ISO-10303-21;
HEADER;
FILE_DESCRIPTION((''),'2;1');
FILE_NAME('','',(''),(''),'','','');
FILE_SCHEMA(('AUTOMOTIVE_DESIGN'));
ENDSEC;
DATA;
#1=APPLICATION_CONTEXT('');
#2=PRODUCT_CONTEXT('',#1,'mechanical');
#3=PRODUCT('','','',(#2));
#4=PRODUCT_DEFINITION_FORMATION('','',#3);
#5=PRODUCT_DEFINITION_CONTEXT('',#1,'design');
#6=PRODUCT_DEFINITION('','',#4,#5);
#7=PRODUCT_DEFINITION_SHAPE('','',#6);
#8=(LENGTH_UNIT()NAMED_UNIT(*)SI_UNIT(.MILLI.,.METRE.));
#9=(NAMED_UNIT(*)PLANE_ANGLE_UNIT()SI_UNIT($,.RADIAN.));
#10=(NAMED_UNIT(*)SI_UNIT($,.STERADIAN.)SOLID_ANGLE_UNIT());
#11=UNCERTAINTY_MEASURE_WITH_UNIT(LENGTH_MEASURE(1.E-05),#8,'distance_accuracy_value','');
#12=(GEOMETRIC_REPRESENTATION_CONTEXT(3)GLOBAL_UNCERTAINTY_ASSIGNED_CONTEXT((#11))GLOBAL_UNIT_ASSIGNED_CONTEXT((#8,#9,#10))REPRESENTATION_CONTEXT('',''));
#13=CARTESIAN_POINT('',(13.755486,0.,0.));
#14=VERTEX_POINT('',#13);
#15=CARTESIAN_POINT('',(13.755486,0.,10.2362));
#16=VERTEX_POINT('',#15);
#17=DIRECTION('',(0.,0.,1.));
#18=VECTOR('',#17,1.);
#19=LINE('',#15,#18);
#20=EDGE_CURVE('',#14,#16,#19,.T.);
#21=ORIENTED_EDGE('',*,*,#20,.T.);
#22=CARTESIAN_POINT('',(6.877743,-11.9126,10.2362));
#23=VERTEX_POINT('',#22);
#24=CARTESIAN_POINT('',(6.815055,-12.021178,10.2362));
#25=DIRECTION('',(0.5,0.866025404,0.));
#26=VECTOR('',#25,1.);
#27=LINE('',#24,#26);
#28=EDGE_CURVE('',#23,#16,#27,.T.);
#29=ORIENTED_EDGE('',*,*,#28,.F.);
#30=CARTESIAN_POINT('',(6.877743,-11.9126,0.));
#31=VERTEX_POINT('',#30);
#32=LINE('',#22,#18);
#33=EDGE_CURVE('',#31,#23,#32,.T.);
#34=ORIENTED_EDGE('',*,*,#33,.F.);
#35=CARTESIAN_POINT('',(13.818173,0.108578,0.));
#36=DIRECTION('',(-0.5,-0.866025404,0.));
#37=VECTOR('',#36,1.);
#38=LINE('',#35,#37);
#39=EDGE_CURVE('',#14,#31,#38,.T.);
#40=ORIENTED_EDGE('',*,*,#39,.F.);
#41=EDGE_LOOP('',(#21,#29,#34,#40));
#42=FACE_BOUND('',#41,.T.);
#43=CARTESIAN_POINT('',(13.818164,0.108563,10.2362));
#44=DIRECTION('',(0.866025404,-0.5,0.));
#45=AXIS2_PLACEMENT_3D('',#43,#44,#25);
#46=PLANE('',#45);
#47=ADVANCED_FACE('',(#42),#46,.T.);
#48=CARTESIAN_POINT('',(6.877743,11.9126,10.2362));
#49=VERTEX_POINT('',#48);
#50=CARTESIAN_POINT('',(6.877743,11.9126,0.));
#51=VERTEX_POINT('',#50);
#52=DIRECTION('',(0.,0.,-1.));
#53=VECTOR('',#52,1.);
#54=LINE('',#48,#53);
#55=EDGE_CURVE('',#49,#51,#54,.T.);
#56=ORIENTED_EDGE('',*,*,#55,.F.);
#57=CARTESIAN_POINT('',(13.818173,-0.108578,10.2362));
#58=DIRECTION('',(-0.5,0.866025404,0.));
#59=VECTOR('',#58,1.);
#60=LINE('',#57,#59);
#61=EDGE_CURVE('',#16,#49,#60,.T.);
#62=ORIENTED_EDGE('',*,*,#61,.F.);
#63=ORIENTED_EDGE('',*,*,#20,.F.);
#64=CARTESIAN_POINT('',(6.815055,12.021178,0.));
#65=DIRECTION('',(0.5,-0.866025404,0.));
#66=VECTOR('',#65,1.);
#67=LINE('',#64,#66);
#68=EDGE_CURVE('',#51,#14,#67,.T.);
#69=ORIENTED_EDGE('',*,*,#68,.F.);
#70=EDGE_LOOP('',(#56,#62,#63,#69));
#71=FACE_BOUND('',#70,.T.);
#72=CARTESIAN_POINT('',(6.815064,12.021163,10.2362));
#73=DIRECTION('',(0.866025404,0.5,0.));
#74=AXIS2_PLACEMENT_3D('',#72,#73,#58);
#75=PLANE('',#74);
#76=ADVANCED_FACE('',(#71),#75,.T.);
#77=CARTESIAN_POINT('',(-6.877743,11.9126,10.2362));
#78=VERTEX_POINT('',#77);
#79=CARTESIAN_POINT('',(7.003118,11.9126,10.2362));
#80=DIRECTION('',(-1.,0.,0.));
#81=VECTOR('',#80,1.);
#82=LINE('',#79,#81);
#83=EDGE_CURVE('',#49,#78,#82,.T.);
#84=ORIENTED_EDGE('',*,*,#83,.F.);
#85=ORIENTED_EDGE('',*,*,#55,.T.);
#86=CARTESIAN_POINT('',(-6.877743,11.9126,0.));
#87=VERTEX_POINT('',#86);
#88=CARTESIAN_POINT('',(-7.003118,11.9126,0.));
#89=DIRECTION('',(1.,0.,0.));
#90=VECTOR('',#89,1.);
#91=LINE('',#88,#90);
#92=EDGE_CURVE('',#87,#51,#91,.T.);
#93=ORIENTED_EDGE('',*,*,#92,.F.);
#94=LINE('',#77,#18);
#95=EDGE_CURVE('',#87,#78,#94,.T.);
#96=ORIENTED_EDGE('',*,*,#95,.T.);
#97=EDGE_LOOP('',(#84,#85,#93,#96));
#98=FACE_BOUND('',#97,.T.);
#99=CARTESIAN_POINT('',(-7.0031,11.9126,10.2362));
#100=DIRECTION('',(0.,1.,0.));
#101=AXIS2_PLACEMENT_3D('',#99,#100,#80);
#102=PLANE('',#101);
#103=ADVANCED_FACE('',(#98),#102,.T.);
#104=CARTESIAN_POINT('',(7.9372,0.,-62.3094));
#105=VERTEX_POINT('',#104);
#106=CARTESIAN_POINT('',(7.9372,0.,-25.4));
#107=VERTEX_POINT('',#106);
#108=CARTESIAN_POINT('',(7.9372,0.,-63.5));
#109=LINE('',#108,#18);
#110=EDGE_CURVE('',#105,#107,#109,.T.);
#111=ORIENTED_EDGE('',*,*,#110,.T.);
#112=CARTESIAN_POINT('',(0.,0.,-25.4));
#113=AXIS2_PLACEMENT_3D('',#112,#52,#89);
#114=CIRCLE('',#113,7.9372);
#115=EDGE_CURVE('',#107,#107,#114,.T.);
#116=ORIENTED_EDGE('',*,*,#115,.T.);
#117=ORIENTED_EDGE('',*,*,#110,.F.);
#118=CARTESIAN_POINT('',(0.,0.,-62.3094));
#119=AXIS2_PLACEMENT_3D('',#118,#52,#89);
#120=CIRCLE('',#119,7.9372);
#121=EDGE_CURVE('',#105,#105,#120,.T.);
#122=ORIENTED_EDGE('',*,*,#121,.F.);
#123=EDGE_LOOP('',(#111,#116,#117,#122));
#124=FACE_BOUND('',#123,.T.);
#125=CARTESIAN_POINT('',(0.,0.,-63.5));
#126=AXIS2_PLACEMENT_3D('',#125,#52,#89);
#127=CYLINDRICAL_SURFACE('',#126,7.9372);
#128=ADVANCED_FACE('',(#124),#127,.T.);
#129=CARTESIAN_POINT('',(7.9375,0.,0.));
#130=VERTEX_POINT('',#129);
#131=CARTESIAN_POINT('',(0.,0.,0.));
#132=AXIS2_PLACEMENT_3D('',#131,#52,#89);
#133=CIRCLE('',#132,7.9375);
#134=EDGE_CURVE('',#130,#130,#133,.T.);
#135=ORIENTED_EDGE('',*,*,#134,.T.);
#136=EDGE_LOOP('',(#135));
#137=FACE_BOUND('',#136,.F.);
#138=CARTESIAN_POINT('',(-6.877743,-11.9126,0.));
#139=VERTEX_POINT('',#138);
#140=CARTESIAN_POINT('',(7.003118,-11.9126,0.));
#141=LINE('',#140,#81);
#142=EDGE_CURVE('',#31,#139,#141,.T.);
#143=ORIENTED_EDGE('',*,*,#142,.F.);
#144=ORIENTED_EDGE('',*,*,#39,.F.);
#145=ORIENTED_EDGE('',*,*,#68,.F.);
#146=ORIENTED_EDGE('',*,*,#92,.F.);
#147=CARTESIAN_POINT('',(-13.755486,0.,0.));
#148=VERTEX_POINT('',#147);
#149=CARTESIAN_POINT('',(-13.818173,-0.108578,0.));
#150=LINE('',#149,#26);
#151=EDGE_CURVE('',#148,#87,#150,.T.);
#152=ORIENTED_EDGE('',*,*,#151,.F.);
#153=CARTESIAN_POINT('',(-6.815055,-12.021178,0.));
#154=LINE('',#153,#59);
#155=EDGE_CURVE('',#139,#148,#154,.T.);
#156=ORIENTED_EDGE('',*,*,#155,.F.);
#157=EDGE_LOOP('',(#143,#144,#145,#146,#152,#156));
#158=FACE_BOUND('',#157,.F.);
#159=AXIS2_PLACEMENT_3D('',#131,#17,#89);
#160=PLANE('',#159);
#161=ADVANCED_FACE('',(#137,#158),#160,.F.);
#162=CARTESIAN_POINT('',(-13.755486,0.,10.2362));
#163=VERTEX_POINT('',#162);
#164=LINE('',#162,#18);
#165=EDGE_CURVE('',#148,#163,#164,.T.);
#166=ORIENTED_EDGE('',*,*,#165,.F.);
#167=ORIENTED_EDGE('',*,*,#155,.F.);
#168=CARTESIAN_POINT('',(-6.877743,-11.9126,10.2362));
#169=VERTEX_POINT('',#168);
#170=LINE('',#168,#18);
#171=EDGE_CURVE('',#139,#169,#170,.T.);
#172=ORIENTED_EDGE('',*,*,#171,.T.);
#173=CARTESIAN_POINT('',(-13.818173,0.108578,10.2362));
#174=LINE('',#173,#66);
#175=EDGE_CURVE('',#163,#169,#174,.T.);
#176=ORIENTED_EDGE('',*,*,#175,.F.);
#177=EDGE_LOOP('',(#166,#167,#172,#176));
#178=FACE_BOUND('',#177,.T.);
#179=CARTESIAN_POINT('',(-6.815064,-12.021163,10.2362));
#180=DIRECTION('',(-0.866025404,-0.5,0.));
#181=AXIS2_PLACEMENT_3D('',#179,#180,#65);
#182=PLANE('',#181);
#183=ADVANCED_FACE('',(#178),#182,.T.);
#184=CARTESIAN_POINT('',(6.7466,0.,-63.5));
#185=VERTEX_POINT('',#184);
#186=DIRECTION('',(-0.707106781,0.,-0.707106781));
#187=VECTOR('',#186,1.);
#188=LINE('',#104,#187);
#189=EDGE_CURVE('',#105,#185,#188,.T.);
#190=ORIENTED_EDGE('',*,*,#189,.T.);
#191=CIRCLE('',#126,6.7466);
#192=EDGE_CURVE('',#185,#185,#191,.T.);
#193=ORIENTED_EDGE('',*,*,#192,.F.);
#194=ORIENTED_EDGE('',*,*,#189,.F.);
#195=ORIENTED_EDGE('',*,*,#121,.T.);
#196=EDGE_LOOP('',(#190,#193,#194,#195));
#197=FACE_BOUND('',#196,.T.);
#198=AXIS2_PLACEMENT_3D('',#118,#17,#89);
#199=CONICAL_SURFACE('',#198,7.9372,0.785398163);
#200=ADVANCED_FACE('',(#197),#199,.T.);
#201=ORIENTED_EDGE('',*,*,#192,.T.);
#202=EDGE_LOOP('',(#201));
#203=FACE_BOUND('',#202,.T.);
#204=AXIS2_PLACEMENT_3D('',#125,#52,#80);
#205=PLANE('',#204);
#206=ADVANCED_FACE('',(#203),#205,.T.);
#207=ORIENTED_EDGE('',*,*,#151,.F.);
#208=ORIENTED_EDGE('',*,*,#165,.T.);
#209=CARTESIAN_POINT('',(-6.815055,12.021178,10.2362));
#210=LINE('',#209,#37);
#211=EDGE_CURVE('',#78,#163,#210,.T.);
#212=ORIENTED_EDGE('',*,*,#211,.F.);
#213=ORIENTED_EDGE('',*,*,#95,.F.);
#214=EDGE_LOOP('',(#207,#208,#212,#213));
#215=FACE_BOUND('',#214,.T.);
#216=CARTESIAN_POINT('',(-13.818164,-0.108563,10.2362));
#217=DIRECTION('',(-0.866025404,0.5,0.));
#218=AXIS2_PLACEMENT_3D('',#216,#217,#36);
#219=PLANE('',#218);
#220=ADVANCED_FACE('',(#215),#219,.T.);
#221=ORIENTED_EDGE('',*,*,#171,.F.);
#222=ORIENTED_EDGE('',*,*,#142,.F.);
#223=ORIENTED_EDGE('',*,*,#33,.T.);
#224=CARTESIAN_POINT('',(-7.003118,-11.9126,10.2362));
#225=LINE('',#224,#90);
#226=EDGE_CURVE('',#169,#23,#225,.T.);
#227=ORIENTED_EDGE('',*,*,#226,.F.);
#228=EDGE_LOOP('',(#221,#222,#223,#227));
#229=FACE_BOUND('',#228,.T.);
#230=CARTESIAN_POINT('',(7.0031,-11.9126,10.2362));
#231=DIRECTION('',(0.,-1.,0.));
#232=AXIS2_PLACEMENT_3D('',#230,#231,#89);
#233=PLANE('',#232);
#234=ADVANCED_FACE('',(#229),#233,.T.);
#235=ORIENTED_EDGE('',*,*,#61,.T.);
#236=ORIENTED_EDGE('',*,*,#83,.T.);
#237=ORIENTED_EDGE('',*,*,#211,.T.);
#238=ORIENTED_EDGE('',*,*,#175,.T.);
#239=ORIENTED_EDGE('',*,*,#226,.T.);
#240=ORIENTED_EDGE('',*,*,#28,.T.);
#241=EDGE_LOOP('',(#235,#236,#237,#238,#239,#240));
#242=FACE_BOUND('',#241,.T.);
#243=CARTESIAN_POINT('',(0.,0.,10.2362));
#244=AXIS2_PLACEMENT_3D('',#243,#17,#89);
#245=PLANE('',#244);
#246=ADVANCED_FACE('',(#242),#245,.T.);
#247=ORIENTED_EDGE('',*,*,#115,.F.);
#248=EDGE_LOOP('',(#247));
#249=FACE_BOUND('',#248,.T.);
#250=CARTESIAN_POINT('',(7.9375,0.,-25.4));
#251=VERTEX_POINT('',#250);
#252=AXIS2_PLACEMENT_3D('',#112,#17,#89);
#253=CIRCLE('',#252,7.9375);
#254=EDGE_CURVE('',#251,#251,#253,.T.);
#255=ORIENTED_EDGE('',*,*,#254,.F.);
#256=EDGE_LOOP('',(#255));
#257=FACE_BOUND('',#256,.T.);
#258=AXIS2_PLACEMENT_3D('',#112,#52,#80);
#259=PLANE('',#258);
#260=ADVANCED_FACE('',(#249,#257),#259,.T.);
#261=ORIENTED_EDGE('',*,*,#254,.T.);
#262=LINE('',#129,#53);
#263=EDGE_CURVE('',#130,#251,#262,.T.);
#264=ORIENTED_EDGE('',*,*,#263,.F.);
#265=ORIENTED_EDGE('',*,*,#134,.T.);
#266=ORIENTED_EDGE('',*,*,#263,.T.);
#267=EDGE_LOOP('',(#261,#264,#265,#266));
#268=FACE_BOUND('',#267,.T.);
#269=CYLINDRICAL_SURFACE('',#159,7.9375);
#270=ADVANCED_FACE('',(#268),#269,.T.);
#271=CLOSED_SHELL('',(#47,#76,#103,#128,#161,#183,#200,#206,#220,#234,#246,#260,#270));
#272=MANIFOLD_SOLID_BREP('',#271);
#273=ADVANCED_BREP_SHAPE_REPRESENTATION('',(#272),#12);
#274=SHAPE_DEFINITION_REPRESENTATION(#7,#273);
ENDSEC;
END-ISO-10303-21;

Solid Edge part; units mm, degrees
sketch "Sketch1" plane through (0, 0, 0) normal (0, 0, 1) x (1, 0, 0)
  circle A0 centre (0, 0) radius 13.8186
  dimension "D1" = 27.6372
extrude "Protrusion1" add sketch "Sketch1" along normal blind 10.2362
sketch "Sketch2" plane through (0, 0, 0) normal (0, 0, -1) x (1, 0, 0)
  circle A0 centre (0, 0) radius 7.9375
extrude "Protrusion2" add sketch "Sketch2" along normal blind 63.5
sketch "Sketch3" plane through (0, 0, -63.5) normal (0, 0, -1) x (1, 0, 0)
  circle A0 centre (0, 0) radius 7.9372
extrude "Cutout1" cut sketch "Sketch3" against normal blind 38.1 flip side to cut
chamfer "Chamfer_1" distance 1.1906 angle 45 1 edges at (-7.9372, 0, -63.5)
sketch "Sketch4" plane through (0, 0, 10.2362) normal (0, 0, 1) x (1, 0, 0)
  line L0 (-7.0031, 11.9126) -> (7.0031, 11.9126)
  dimension "D1" = 23.8252
extrude "Cutout2" cut sketch "Sketch4" against normal up to next material side at (0, 11.9626, 10.2362)
pattern_circular "Pattern1" count 6 over 360 about axis through (0, 0, 10.2362) along (0, 0, 1) of "Cutout2"
properties part number "24109128"
